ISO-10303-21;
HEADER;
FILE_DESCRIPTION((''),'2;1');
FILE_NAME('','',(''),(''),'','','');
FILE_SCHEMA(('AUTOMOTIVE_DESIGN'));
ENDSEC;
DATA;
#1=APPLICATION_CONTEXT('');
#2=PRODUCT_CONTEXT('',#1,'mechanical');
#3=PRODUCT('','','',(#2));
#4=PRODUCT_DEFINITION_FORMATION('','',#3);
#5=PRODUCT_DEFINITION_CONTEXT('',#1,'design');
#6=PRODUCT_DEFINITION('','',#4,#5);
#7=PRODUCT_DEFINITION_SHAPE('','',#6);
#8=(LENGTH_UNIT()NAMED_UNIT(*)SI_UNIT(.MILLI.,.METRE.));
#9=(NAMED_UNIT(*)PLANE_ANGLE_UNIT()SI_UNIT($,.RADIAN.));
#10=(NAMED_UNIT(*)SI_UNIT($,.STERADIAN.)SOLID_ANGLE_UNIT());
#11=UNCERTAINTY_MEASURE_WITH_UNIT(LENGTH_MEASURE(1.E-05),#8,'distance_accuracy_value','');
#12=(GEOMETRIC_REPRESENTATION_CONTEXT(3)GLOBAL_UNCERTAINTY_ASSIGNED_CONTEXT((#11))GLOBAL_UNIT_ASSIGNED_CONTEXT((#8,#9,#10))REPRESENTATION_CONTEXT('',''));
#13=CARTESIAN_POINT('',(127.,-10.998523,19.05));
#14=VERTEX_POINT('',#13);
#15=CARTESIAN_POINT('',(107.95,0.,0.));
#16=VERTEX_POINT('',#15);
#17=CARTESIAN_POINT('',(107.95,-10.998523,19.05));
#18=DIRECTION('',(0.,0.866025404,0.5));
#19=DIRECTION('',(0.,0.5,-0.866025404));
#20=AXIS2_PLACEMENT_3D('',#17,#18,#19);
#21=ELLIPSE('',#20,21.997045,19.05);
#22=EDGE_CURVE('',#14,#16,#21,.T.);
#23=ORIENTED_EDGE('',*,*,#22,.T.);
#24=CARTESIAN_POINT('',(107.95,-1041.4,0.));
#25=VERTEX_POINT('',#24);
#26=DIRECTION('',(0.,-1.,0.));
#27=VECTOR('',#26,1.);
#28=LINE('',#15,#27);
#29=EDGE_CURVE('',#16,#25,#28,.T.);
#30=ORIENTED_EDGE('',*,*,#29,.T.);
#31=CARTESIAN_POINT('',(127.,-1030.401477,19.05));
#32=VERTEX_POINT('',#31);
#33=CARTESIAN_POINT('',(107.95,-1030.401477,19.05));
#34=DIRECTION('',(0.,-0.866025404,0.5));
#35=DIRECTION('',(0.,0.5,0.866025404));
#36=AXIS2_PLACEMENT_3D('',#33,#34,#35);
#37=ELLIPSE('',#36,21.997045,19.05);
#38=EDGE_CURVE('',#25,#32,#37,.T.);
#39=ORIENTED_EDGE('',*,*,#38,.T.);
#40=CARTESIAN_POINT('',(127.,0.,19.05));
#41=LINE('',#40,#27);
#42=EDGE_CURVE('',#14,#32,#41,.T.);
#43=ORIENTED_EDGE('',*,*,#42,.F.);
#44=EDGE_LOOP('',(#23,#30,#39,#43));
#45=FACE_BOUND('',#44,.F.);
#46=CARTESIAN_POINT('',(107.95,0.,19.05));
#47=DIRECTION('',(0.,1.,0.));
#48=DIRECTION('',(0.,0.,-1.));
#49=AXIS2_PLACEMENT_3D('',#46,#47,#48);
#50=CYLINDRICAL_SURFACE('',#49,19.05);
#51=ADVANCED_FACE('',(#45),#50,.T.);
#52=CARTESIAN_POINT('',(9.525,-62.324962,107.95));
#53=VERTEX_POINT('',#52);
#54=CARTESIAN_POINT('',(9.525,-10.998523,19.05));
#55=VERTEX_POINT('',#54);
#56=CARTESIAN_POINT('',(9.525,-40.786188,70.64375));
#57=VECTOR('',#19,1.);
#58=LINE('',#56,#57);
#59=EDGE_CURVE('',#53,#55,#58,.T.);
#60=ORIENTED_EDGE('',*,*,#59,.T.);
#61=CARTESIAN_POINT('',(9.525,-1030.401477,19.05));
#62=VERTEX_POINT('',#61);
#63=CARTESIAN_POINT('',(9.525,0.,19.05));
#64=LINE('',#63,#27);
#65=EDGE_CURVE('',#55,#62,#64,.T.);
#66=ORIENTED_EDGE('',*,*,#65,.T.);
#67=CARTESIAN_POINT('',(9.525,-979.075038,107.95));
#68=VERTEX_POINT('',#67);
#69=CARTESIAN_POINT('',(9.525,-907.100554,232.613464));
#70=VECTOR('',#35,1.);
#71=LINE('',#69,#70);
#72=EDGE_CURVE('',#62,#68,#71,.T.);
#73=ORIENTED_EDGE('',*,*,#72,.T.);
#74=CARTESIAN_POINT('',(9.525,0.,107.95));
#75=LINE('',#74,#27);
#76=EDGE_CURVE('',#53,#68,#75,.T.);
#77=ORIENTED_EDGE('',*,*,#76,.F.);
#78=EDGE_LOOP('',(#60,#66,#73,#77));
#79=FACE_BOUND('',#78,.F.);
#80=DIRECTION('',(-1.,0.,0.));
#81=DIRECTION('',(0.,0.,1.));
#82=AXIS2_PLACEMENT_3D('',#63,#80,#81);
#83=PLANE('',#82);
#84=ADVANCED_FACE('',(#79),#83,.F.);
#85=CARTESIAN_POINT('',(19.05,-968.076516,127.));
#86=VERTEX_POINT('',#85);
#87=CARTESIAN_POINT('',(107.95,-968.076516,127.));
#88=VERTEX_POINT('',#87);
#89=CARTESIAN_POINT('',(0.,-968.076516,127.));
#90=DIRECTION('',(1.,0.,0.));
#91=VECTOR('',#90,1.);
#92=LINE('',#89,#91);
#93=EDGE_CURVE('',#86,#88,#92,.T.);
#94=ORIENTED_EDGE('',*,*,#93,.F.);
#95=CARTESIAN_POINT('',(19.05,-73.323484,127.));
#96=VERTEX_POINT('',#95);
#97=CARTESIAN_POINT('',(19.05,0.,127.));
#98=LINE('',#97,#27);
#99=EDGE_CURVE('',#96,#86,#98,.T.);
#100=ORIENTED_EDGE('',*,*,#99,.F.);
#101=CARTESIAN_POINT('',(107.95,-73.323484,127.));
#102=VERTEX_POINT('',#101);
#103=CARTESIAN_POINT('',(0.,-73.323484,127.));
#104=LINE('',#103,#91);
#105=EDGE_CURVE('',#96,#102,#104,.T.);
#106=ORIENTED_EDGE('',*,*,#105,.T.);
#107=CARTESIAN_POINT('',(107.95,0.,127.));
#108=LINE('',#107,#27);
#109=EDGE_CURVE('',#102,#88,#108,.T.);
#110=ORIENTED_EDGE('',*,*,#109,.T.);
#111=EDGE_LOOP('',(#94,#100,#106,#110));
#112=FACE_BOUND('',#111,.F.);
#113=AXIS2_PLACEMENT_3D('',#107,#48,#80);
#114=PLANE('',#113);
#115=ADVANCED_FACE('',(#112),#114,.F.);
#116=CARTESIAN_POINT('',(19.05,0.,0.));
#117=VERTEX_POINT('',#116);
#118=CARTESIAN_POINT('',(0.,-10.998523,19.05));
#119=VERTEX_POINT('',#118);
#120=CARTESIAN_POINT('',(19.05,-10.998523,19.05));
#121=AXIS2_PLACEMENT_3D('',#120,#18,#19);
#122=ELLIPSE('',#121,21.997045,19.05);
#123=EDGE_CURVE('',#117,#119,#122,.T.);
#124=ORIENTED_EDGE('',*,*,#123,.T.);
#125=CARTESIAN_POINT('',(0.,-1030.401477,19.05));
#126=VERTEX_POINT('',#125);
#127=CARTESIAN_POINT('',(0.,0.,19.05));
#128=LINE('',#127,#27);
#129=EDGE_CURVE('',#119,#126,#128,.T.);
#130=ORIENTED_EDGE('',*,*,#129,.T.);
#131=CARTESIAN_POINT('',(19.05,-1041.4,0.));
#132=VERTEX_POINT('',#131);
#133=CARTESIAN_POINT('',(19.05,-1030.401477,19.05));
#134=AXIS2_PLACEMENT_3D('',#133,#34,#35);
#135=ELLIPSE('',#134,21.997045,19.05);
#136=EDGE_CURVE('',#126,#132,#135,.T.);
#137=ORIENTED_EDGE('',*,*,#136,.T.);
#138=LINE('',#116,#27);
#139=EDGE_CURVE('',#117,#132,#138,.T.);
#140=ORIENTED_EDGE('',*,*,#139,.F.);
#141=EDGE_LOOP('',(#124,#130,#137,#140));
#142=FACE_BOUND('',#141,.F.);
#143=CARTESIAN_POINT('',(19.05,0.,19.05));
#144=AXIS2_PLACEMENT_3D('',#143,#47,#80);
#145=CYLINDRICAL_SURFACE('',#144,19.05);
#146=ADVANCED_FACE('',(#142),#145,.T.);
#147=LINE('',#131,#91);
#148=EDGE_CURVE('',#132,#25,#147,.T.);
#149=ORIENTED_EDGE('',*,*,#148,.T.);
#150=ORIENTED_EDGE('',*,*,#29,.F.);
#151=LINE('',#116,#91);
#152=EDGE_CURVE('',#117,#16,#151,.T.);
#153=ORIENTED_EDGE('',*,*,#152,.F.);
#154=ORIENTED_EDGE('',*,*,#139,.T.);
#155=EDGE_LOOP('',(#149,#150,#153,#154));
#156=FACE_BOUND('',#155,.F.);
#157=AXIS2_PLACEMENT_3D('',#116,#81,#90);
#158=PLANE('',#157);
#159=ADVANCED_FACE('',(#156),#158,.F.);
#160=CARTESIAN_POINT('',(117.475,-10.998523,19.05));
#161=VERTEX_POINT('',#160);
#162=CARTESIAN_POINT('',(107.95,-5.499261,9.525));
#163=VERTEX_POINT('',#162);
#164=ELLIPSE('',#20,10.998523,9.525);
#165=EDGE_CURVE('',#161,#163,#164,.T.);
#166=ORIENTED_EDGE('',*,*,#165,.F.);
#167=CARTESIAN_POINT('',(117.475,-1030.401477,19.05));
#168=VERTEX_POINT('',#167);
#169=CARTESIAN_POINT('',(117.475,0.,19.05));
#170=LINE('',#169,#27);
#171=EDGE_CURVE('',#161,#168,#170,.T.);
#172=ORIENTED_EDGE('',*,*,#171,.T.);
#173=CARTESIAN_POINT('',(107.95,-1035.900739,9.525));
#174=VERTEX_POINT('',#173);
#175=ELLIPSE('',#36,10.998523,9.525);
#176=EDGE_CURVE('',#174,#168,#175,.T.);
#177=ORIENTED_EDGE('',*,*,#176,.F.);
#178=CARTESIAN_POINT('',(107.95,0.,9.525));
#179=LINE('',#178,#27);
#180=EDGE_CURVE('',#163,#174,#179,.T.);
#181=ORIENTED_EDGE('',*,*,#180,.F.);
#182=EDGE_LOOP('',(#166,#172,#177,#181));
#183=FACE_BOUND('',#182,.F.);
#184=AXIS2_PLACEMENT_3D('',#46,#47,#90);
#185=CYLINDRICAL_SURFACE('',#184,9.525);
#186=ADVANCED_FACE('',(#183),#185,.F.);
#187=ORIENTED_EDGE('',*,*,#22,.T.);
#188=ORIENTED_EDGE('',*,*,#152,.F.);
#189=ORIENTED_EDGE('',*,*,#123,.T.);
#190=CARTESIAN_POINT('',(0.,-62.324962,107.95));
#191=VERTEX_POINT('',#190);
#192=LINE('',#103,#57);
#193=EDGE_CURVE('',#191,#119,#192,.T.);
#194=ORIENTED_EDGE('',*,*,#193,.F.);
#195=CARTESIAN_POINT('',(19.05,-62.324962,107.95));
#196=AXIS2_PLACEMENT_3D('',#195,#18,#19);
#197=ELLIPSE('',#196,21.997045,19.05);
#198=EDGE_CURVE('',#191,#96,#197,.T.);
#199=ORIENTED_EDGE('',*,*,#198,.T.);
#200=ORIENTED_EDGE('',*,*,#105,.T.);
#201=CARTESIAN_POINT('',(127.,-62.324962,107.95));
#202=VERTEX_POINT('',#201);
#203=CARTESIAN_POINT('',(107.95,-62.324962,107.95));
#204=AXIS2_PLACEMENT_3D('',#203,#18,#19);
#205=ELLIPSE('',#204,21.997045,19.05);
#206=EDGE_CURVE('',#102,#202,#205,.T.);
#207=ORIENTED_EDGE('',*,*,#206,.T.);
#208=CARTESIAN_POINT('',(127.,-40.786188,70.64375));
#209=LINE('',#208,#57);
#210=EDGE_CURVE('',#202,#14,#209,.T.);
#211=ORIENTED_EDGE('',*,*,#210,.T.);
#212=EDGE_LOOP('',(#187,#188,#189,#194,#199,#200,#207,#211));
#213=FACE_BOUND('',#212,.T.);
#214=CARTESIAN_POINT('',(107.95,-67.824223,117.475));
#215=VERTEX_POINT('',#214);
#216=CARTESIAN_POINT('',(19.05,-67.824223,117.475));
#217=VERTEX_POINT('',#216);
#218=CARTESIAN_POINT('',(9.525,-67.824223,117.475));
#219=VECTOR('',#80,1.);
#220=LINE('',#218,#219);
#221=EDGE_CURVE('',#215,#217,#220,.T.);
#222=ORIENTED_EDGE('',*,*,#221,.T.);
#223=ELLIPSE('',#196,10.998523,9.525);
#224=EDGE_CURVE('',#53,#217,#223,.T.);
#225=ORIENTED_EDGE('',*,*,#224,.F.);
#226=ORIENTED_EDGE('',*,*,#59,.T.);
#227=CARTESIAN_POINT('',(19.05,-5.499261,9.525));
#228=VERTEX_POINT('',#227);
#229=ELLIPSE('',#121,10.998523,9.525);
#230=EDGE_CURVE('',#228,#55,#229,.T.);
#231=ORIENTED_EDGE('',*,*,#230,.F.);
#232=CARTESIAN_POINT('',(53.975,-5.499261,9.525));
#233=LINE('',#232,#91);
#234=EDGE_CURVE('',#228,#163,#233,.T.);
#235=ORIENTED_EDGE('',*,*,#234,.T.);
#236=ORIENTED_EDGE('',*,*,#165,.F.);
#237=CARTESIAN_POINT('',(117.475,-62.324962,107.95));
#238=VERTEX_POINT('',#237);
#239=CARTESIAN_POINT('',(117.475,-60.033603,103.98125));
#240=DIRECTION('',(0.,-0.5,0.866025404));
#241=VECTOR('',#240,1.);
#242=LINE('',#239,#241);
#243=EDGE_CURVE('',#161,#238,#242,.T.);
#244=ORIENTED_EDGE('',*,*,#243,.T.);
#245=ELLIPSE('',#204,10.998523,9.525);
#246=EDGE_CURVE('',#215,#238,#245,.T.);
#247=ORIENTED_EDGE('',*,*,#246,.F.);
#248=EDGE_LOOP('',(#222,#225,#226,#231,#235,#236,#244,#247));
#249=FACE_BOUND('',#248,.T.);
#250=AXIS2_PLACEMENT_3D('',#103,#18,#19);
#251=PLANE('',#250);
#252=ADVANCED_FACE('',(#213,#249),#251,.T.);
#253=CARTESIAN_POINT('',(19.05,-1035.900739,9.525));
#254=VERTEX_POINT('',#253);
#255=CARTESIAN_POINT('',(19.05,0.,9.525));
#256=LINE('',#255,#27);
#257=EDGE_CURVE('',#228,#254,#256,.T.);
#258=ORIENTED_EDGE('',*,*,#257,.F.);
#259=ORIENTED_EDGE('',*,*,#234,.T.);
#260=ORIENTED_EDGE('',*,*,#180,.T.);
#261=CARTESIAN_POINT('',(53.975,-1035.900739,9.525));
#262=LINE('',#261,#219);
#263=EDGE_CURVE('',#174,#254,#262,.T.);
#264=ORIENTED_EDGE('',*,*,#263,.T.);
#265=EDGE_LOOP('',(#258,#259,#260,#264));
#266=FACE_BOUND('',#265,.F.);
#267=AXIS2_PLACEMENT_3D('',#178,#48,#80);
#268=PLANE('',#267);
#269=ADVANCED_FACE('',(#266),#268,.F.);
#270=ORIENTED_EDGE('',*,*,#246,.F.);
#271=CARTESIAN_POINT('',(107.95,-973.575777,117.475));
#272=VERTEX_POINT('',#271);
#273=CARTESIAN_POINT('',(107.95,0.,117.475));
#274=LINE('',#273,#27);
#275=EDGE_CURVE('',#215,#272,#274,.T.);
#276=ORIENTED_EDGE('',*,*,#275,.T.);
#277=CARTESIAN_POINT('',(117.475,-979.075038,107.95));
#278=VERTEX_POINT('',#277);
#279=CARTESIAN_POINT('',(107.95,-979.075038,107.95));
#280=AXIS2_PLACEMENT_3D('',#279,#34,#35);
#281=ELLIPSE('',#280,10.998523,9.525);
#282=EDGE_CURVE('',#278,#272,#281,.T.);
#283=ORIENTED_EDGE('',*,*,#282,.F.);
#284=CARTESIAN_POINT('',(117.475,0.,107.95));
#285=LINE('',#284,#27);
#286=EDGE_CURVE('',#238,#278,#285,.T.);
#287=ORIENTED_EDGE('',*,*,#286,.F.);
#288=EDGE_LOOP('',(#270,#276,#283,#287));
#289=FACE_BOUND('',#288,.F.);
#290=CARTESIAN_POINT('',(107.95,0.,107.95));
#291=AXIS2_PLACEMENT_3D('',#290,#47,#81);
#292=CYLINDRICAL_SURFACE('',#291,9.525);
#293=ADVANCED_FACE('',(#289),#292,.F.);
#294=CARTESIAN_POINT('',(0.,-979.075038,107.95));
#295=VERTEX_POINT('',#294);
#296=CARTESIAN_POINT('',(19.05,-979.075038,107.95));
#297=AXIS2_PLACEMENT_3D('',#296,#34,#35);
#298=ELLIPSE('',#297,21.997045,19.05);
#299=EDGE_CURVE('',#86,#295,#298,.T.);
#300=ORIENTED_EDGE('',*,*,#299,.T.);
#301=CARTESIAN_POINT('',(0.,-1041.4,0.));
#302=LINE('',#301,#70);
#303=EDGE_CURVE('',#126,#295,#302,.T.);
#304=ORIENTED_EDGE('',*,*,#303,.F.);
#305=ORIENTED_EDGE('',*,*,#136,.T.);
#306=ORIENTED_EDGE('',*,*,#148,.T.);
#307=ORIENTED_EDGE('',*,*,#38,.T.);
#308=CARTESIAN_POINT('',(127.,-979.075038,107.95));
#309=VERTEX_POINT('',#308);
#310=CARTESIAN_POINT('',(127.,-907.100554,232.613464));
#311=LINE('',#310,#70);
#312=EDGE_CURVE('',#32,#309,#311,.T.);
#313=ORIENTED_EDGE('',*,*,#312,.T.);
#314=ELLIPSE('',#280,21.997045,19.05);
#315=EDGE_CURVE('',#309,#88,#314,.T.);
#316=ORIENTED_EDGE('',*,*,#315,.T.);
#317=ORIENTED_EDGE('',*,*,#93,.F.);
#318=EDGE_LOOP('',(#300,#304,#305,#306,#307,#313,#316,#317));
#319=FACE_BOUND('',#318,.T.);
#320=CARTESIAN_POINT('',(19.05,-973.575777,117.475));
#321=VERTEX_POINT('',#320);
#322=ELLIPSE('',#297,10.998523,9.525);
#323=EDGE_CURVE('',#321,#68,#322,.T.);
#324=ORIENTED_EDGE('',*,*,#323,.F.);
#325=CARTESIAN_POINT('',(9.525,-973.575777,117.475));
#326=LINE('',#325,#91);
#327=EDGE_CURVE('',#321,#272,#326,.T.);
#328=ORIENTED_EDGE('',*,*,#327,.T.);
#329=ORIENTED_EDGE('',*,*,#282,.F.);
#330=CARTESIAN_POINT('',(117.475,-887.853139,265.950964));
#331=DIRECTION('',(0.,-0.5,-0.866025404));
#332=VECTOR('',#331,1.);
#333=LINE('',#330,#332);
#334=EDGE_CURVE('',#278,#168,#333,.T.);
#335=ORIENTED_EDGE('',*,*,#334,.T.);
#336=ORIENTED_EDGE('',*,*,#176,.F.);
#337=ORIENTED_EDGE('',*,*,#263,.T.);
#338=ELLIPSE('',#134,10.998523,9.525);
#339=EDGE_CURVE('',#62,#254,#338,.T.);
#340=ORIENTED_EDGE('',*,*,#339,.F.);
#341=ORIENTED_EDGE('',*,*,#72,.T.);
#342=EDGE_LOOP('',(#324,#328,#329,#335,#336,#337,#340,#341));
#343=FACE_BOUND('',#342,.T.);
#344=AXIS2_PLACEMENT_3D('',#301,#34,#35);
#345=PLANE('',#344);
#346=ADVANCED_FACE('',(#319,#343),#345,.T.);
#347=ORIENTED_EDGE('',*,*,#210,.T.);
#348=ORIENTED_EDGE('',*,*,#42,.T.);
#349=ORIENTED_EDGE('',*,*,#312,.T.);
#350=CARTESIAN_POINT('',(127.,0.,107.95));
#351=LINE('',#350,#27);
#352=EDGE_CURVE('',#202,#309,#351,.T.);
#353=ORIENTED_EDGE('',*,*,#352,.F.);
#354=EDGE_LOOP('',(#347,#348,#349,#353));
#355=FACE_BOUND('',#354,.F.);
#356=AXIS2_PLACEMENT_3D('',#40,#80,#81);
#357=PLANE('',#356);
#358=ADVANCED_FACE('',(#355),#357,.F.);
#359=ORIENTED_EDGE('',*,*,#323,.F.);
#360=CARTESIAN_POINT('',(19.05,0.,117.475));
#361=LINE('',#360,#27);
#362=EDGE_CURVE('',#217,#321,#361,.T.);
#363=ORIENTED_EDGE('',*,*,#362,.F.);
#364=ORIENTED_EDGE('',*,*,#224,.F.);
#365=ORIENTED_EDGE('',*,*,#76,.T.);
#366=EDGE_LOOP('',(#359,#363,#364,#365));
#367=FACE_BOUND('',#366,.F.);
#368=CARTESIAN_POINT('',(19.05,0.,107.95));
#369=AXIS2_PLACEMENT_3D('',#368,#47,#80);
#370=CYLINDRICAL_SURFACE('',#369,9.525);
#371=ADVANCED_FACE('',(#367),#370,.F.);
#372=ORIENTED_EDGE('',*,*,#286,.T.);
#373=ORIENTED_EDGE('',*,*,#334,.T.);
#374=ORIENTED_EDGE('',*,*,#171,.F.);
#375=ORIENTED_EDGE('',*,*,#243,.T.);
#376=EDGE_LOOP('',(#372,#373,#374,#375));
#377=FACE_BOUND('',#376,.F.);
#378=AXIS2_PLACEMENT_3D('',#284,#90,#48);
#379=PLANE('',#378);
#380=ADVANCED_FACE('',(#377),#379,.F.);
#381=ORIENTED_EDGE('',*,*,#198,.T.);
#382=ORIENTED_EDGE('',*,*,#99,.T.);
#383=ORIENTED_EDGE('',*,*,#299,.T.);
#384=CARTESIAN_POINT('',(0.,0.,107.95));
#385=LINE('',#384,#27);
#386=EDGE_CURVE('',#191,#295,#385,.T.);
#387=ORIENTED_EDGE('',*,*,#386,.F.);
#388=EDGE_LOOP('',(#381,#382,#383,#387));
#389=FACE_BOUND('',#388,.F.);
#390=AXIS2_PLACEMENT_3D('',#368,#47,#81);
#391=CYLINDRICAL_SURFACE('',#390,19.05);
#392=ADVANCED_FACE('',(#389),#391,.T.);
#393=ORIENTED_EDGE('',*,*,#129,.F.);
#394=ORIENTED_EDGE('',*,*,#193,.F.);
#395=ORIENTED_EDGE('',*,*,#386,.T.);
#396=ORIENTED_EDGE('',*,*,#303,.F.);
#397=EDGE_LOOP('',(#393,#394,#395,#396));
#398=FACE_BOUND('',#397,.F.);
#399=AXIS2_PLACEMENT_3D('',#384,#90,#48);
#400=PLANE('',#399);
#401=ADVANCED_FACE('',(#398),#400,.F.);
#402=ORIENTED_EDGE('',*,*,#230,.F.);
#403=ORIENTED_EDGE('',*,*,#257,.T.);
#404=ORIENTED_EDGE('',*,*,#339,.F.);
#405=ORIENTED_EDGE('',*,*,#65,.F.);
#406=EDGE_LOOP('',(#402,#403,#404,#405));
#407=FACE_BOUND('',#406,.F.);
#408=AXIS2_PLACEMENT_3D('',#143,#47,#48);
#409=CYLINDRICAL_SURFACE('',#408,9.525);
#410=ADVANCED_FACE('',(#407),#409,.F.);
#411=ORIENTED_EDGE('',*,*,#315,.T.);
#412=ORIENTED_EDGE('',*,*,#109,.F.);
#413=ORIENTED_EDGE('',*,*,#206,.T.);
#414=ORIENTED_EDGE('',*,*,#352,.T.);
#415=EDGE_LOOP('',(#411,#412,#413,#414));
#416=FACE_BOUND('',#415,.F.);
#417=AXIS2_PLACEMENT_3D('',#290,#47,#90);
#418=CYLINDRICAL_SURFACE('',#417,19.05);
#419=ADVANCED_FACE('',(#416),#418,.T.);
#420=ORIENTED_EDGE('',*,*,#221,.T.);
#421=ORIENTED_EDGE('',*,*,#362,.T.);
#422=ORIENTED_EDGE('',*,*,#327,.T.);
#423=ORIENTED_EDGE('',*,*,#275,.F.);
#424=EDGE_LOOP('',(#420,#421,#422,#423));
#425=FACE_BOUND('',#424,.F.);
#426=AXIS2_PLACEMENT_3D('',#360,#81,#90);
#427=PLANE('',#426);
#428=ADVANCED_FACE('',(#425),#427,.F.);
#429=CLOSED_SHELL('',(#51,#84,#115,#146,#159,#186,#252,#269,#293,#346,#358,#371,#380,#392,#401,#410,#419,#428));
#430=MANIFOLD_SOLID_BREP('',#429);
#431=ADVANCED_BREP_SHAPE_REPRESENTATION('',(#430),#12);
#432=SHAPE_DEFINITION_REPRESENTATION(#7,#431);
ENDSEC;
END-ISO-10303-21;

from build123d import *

# Parameters (mm, degrees)
F1_DEPTH = 1041.4
F3_DEPTH = 127.001


# Not quite as in the source:
# - a feature names something its author has since deleted; it is built from what else it names


with BuildPart() as f1:
    # F0 (on Front) → F1 (new body)
    with BuildSketch(Plane.XZ):
        with BuildLine():
            ThreePointArc((0, 19.05), (5.5796158184, 5.5796158184), (19.05, 0))
            Line((19.05, 0), (107.95, 0))
            ThreePointArc((107.95, 0), (121.4203841816, 5.5796158184), (127, 19.05))
            Line((127, 19.05), (127, 107.95))
            ThreePointArc((127, 107.95), (121.4203841816, 121.4203841816), (107.95, 127))
            Line((107.95, 127), (19.05, 127))
            ThreePointArc((19.05, 127), (5.5796158184, 121.4203841816), (0, 107.95))
            Line((0, 107.95), (0, 19.05))
        make_face()
        with BuildLine():
            ThreePointArc((19.05, 9.525), (12.3148079092, 12.3148079092), (9.525, 19.05))
            Line((9.525, 19.05), (9.525, 107.95))
            ThreePointArc((9.525, 107.95), (12.3148079092, 114.6851920908), (19.05, 117.475))
            Line((19.05, 117.475), (107.95, 117.475))
            ThreePointArc((107.95, 117.475), (114.6851920908, 114.6851920908), (117.475, 107.95))
            Line((117.475, 107.95), (117.475, 19.05))
            ThreePointArc((117.475, 19.05), (114.6851920908, 12.3148079092), (107.95, 9.525))
            Line((107.95, 9.525), (19.05, 9.525))
        make_face(mode=Mode.SUBTRACT)
    extrude(amount=F1_DEPTH)

    # F2 (on Right) → F3 (cut, through all)
    with BuildSketch(Plane.YZ):
        Polygon((-1041.4, 19.05), (-1041.4, 0), (-968.0765158129, 127), (-1041.4, 127), (-1041.4, 107.95), align=None)
        Polygon((-73.3234841871, 127), (0, 0), (0, 19.05), (0, 107.95), (0, 127), align=None)
    extrude(amount=F3_DEPTH, mode=Mode.SUBTRACT)


solid = f1.part
